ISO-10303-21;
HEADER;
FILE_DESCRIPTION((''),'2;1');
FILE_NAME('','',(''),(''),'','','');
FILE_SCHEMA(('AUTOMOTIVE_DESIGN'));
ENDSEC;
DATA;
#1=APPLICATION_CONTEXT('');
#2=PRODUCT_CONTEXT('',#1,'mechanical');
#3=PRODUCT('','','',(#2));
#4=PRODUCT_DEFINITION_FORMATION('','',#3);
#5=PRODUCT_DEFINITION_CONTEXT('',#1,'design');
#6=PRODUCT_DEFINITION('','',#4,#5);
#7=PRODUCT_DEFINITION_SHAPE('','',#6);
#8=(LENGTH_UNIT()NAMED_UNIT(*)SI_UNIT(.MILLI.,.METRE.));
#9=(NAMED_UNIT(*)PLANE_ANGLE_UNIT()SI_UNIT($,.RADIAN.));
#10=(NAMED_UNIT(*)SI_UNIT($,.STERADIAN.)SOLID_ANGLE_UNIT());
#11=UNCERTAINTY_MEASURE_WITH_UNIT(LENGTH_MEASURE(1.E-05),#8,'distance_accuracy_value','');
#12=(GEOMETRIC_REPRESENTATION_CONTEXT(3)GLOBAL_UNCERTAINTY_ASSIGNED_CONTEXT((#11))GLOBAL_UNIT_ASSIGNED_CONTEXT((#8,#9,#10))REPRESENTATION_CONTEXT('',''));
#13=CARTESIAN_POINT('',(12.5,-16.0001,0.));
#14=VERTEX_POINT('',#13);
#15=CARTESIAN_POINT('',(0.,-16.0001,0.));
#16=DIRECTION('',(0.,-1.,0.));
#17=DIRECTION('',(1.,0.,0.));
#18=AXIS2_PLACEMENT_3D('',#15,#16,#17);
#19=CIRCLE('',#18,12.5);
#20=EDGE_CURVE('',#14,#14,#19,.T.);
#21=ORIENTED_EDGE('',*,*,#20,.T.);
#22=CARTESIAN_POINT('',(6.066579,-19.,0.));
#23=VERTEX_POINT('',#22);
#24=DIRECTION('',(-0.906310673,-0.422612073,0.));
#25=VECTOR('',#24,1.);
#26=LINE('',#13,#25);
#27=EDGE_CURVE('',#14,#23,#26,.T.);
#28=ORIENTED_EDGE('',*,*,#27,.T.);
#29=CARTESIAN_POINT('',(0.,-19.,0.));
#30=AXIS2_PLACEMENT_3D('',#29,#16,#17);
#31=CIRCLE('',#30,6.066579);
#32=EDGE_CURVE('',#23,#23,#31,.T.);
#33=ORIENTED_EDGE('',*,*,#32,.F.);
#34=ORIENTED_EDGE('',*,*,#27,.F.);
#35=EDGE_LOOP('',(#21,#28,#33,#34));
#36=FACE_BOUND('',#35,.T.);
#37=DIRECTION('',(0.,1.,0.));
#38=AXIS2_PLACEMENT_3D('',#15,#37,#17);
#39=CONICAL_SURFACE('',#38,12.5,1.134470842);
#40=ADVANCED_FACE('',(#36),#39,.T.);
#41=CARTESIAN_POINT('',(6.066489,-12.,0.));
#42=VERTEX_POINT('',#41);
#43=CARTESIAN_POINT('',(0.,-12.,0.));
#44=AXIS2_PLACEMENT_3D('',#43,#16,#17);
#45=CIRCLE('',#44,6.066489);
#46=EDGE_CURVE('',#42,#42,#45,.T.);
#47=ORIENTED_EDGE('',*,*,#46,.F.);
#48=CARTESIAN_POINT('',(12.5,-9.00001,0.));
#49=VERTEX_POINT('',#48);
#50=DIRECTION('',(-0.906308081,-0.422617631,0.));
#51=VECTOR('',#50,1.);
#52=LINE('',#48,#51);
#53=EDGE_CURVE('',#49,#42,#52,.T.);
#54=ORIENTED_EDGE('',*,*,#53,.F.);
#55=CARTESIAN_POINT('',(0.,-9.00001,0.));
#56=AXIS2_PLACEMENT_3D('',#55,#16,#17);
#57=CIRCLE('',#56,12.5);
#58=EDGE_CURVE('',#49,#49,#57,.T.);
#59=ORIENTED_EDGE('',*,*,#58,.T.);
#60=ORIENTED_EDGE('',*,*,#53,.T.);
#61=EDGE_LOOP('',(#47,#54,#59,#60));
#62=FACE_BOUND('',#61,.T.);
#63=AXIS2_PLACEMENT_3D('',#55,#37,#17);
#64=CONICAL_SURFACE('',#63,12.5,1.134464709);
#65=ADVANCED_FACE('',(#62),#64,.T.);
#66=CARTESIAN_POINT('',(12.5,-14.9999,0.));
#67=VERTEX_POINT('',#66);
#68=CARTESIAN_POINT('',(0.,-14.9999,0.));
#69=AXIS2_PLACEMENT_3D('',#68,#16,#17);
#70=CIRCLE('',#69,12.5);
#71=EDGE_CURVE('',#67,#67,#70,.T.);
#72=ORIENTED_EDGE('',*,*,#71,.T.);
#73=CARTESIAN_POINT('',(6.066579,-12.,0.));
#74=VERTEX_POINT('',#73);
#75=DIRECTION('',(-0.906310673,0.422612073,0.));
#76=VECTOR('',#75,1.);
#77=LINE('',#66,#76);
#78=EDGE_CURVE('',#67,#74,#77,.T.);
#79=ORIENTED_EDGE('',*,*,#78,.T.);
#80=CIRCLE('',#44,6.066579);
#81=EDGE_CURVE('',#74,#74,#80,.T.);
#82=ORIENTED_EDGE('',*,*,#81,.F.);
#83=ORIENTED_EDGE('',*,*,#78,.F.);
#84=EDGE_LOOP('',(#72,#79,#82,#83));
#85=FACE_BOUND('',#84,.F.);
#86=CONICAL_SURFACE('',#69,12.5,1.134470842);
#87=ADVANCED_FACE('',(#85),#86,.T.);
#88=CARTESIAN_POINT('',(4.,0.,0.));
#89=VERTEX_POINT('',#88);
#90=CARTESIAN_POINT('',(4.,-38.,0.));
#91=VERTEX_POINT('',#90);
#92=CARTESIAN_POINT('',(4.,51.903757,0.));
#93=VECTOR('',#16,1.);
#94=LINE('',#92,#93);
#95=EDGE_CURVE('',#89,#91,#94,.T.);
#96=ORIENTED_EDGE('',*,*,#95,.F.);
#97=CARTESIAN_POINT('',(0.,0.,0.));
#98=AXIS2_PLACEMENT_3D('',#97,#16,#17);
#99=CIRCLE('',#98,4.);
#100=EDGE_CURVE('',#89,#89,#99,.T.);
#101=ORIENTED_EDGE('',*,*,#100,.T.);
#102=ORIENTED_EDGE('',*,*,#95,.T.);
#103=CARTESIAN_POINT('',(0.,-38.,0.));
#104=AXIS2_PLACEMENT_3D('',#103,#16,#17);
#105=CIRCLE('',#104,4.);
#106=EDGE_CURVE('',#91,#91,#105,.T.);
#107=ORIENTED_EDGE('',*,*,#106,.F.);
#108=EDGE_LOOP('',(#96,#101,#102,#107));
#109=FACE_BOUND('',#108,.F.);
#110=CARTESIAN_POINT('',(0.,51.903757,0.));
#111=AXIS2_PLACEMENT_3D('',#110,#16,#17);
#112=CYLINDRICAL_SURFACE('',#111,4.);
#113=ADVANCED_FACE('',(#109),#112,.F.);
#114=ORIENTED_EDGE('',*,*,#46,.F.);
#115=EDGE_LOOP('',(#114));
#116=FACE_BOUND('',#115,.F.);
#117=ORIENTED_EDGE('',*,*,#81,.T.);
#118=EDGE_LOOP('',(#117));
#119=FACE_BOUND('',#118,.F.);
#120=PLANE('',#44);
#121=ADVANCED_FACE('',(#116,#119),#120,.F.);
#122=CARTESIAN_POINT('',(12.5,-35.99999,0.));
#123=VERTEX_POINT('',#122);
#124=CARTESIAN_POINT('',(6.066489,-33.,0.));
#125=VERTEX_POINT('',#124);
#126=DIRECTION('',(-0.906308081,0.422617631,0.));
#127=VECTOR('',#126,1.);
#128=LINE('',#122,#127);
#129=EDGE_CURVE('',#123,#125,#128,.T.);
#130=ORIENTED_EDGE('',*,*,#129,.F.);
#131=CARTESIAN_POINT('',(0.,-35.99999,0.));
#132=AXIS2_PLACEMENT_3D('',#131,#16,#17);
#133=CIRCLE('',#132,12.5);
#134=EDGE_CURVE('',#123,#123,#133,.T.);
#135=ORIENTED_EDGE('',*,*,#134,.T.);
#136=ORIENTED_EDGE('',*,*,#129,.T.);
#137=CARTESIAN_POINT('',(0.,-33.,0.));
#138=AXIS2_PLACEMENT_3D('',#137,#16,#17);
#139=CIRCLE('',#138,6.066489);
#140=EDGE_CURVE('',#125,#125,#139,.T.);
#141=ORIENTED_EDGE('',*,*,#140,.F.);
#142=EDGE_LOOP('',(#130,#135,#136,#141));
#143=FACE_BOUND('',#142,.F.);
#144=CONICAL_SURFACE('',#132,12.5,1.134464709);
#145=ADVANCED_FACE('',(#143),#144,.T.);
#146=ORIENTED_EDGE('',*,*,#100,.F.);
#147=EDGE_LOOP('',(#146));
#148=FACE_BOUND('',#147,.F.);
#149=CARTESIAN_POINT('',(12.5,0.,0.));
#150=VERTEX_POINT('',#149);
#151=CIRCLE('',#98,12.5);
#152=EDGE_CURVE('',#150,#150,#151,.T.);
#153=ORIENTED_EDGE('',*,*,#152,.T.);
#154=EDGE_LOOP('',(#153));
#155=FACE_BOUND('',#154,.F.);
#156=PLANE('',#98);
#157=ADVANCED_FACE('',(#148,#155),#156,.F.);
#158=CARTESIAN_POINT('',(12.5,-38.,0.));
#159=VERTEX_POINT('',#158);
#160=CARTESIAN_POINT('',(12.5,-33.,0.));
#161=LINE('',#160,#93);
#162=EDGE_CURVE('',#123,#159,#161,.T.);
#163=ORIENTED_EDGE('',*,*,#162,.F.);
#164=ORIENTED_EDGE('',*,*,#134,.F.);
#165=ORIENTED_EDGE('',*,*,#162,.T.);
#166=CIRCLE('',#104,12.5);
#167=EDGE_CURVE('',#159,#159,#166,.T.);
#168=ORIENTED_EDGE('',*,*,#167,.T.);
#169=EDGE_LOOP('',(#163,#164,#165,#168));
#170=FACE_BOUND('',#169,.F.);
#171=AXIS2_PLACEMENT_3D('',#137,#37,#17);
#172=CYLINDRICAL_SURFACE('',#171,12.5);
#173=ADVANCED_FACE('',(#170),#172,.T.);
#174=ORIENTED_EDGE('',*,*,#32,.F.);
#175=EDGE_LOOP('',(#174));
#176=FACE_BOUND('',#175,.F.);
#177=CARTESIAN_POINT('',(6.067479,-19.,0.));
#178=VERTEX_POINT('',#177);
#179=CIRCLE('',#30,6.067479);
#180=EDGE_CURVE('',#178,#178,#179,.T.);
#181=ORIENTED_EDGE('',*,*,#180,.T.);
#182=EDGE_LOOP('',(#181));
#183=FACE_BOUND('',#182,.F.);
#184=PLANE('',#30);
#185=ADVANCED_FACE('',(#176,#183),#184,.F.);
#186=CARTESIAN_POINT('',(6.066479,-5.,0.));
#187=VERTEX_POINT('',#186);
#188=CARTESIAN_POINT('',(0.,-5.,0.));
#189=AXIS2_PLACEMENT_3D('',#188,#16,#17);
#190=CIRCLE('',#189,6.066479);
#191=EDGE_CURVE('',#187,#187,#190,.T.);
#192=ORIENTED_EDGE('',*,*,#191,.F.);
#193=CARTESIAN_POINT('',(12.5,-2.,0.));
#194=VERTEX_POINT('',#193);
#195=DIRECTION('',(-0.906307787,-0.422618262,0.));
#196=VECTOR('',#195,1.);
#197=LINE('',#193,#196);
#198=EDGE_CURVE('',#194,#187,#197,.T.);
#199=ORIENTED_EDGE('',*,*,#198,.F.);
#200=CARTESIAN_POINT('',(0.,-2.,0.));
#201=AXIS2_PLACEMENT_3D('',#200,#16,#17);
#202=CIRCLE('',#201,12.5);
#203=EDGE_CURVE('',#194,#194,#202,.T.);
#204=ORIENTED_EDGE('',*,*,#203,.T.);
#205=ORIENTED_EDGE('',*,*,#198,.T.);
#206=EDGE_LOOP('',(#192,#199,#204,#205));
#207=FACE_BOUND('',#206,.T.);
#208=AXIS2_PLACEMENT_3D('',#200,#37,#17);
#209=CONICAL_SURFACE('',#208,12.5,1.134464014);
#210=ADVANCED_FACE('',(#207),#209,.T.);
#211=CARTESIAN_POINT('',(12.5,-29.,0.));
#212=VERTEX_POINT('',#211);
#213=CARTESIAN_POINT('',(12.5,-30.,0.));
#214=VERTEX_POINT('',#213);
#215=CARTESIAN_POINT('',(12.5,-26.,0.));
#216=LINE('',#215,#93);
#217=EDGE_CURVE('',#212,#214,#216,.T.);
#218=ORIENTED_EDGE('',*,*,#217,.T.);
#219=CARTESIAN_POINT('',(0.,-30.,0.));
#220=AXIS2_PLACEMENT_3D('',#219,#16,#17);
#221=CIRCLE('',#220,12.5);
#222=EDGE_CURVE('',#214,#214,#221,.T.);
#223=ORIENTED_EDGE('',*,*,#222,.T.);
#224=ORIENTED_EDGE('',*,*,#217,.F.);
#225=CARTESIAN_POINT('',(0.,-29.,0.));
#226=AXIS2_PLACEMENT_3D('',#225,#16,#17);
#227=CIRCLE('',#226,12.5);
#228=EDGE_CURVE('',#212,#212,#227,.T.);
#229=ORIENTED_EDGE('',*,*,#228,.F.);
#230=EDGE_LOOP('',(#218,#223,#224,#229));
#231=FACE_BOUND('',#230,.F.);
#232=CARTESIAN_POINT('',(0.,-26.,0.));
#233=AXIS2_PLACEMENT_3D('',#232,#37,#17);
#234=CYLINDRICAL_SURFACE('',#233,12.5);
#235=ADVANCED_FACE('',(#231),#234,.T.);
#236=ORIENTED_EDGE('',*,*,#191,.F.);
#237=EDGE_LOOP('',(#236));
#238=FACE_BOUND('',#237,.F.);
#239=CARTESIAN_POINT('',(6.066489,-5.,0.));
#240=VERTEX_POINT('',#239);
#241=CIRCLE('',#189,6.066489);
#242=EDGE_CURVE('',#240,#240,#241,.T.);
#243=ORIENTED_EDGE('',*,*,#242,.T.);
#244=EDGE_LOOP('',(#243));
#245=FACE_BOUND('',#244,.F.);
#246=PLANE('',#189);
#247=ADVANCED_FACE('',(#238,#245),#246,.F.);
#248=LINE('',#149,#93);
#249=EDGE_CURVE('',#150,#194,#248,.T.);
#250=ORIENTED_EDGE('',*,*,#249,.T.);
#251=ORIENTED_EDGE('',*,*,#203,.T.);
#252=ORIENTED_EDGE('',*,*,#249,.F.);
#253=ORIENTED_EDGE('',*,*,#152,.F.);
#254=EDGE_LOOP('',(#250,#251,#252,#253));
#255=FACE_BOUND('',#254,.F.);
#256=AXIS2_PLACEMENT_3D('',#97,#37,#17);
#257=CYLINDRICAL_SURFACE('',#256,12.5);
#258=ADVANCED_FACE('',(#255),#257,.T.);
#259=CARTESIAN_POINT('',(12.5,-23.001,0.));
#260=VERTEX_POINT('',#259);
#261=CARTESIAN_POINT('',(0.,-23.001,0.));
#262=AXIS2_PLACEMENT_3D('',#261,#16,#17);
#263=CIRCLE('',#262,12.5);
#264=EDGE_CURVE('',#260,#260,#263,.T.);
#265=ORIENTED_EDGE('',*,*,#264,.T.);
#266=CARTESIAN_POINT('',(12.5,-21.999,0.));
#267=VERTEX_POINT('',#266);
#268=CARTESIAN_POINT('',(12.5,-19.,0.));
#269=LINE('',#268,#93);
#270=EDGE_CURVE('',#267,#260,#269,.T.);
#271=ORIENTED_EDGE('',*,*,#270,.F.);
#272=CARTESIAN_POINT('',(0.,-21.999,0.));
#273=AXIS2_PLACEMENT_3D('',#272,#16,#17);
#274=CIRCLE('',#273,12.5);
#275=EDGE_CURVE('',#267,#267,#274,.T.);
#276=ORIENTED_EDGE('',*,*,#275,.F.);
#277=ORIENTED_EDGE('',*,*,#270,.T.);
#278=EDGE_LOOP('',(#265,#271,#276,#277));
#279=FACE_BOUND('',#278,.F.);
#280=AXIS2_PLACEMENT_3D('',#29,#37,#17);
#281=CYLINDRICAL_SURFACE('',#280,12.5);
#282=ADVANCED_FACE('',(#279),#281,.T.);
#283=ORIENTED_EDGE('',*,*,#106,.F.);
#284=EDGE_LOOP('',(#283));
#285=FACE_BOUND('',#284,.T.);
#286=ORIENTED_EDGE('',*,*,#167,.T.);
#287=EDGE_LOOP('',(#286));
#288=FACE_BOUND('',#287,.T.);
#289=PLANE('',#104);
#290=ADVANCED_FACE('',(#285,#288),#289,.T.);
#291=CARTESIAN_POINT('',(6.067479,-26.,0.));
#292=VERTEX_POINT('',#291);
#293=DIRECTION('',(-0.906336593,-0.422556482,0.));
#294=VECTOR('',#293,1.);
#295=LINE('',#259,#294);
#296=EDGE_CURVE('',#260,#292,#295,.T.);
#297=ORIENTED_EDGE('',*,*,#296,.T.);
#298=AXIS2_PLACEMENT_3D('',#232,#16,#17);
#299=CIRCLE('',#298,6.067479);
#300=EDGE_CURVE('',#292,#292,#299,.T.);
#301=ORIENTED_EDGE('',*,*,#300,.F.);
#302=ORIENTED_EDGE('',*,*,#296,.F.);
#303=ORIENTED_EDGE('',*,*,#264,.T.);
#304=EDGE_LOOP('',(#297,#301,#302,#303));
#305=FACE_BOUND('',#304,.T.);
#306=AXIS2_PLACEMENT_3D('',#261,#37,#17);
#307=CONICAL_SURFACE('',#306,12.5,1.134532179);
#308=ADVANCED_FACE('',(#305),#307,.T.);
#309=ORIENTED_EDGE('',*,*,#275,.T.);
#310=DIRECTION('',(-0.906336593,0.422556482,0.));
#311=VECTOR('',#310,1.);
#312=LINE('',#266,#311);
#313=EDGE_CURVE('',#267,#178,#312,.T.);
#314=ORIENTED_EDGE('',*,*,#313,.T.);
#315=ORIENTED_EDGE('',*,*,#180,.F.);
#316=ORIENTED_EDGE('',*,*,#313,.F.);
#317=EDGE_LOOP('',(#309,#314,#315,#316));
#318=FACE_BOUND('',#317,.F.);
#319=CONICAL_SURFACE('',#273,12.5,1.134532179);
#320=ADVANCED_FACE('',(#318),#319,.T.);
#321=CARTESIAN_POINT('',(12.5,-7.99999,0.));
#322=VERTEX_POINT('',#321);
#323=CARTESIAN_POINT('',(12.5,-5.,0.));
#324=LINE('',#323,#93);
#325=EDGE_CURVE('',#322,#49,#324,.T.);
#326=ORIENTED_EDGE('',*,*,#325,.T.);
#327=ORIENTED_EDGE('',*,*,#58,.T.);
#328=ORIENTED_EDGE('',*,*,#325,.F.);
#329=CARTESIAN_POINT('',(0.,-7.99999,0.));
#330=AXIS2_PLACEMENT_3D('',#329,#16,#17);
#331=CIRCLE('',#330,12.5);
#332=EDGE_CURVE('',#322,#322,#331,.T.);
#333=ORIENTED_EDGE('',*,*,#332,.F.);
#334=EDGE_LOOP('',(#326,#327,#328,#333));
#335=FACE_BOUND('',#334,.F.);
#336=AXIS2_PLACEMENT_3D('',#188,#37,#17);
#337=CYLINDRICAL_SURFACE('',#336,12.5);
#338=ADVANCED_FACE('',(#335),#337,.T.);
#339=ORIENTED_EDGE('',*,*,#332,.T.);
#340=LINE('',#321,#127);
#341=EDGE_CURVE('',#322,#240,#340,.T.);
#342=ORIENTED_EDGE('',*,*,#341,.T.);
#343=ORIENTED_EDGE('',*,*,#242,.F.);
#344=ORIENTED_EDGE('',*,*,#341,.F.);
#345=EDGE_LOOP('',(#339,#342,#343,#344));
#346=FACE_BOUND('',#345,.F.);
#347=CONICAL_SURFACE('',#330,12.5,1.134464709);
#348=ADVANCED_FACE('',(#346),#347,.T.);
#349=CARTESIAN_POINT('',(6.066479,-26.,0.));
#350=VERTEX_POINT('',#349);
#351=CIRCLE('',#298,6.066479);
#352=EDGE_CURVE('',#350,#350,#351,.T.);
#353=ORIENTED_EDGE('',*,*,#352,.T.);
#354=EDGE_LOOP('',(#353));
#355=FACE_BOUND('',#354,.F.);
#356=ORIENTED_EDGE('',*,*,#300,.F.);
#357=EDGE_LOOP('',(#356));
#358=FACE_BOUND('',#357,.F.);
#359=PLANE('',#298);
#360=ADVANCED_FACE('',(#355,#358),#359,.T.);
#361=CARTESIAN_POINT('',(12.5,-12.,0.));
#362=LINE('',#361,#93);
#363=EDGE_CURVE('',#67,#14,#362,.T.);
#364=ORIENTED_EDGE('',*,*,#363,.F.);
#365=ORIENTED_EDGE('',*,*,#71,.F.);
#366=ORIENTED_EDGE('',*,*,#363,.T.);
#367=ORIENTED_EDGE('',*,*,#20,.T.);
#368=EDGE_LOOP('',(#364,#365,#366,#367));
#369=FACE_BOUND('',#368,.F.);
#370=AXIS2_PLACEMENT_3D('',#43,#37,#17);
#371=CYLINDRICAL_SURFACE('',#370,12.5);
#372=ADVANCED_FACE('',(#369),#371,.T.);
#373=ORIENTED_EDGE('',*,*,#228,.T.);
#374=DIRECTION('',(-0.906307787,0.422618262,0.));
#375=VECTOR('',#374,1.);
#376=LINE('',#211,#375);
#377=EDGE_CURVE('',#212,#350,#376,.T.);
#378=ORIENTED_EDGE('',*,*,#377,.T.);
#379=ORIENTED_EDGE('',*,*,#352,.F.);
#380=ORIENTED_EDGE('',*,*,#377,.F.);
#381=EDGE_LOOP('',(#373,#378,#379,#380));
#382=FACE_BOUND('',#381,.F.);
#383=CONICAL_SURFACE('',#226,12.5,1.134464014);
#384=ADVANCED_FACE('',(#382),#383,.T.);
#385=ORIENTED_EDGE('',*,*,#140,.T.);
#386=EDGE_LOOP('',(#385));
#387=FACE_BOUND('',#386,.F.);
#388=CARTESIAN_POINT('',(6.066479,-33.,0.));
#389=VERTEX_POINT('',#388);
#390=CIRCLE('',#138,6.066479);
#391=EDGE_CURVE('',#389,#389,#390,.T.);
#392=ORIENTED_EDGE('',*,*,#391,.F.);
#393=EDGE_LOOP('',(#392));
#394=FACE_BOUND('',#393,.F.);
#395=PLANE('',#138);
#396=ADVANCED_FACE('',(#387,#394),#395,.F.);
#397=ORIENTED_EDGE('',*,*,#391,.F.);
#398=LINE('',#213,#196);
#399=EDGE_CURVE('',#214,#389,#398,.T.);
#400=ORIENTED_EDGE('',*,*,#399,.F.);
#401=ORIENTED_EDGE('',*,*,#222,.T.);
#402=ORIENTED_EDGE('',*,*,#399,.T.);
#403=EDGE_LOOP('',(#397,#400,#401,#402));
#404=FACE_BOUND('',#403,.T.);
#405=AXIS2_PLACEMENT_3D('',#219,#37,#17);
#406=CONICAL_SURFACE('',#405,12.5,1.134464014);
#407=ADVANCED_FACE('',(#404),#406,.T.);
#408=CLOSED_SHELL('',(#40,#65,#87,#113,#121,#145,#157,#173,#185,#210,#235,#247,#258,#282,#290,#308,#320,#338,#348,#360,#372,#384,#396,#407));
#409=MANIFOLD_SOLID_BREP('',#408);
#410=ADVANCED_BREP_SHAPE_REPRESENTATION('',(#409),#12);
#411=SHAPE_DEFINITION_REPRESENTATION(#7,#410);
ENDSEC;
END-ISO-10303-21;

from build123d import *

# Parameters (mm, degrees)
F0_R      = 12.5
F1_DEPTH  = 5
F2_SIZE2  = 6.4335207615
F2_SIZE   = 3
F3_R      = 12.5
F4_DEPTH  = 7
F5_SIZE2  = 6.433511
F5_SIZE   = 2.99999
F6_R      = 12.5
F7_DEPTH  = 7
F8_SIZE2  = 6.433421
F8_SIZE   = 2.9999
F9_R      = 12.5
F10_DEPTH = 7
F11_SIZE2 = 6.432521
F11_SIZE  = 2.999
F12_R     = 12.5
F13_DEPTH = 7
F15_R     = 12.5
F16_DEPTH = 5
F17_SIZE2 = 6.433511
F17_SIZE  = 2.99999
F19_D     = 8


# Not quite as in the source:
# - a fillet or chamfer that OpenCascade refuses, or shapes differently, is made with other operations: its cross-section is extruded or revolved along the edge and cut away or added
# - a fillet or chamfer is up to 0.001 mm smaller than in the source, because OpenCascade refuses the exact size


with BuildPart() as f1:
    # F0 (on Front) → F1 (new body)
    with BuildSketch(Plane.XZ):
        Circle(F0_R)
    extrude(amount=F1_DEPTH)

    # F2
    f2_edges = [f1.edges().sort_by_distance(p)[0] for p in [
        (-12.5, -5, 0),
    ]]
    f2_side = f1.faces().sort_by_distance((-12.5, -2.5, 0))[0]
    chamfer(f2_edges, length=F2_SIZE, length2=F2_SIZE2, reference=f2_side)

    # F3 (on face) → F4 (join)
    with BuildSketch(Plane.XZ.offset(5)):
        Circle(F3_R)
    extrude(amount=F4_DEPTH)

    # F5 (size 3 and 6.4335207615 in the source; OpenCascade refuses exactly that, so slightly less here)
    f5_edges = [f1.edges().sort_by_distance(p)[0] for p in [
        (-12.5, -5, 0),
        (-12.5, -12, 0),
    ]]
    f5_side = f1.faces().sort_by_distance((-12.5, -8.5, 0))[0]
    chamfer(f5_edges, length=F5_SIZE, length2=F5_SIZE2, reference=f5_side)

    # F6 (on face) → F7 (join)
    with BuildSketch(Plane.XZ.offset(12)):
        Circle(F6_R)
    extrude(amount=F7_DEPTH)

    # F8 (size 3 and 6.4335207615 in the source; OpenCascade refuses exactly that, so slightly less here)
    f8_edges = [f1.edges().sort_by_distance(p)[0] for p in [
        (-12.5, -12, 0),
        (-12.5, -19, 0),
    ]]
    f8_side = f1.faces().sort_by_distance((-12.5, -15.5, 0))[0]
    chamfer(f8_edges, length=F8_SIZE, length2=F8_SIZE2, reference=f8_side)

    # F9 (on face) → F10 (join)
    with BuildSketch(Plane.XZ.offset(19)):
        Circle(F9_R)
    extrude(amount=F10_DEPTH)

    # F11 (size 3 and 6.4335207615 in the source; OpenCascade refuses exactly that, so slightly less here)
    f11_edges = [f1.edges().sort_by_distance(p)[0] for p in [
        (-12.5, -19, 0),
        (-12.5, -26, 0),
    ]]
    f11_side = f1.faces().sort_by_distance((-12.5, -22.5, 0))[0]
    chamfer(f11_edges, length=F11_SIZE, length2=F11_SIZE2, reference=f11_side)

    # F12 (on face) → F13 (join)
    with BuildSketch(Plane.XZ.offset(26)):
        Circle(F12_R)
    extrude(amount=F13_DEPTH)

    # F14: chamfer of 3 x 6.4335207615 on 2 edges, made by hand

    # F14_s1 → F14_t2 (revolve, cut)
    with BuildSketch(Plane.XY):
        Polygon((12.5, -29), (6.0664792385, -26), (12.5, -26), align=None)
    revolve(axis=Axis((0, -26, 0), (0, -1, 0)), mode=Mode.SUBTRACT)

    # F14_s3 → F14_t4 (revolve, cut)
    with BuildSketch(Plane.XY):
        Polygon((12.5, -30), (6.0664792385, -33), (12.5, -33), align=None)
    revolve(axis=Axis((0, -33, 0), (0, -1, 0)), mode=Mode.SUBTRACT)

    # F15 (on face) → F16 (join)
    with BuildSketch(Plane.XZ.offset(33)):
        Circle(F15_R)
    extrude(amount=F16_DEPTH)

    # F17 (size 3 and 6.4335207615 in the source; OpenCascade refuses exactly that, so slightly less here)
    f17_edges = [f1.edges().sort_by_distance(p)[0] for p in [
        (-12.5, -33, 0),
    ]]
    f17_side = f1.faces().sort_by_distance((-12.5, -35.5, 0))[0]
    chamfer(f17_edges, length=F17_SIZE, length2=F17_SIZE2, reference=f17_side)

    # F19 (through all)
    with Locations(Plane(origin=(0, 0, 0), x_dir=(-1, 0, 0), z_dir=(0, 1, 0))):
        with Locations((0, 0)):
            Hole(F19_D / 2)


solid = f1.part
